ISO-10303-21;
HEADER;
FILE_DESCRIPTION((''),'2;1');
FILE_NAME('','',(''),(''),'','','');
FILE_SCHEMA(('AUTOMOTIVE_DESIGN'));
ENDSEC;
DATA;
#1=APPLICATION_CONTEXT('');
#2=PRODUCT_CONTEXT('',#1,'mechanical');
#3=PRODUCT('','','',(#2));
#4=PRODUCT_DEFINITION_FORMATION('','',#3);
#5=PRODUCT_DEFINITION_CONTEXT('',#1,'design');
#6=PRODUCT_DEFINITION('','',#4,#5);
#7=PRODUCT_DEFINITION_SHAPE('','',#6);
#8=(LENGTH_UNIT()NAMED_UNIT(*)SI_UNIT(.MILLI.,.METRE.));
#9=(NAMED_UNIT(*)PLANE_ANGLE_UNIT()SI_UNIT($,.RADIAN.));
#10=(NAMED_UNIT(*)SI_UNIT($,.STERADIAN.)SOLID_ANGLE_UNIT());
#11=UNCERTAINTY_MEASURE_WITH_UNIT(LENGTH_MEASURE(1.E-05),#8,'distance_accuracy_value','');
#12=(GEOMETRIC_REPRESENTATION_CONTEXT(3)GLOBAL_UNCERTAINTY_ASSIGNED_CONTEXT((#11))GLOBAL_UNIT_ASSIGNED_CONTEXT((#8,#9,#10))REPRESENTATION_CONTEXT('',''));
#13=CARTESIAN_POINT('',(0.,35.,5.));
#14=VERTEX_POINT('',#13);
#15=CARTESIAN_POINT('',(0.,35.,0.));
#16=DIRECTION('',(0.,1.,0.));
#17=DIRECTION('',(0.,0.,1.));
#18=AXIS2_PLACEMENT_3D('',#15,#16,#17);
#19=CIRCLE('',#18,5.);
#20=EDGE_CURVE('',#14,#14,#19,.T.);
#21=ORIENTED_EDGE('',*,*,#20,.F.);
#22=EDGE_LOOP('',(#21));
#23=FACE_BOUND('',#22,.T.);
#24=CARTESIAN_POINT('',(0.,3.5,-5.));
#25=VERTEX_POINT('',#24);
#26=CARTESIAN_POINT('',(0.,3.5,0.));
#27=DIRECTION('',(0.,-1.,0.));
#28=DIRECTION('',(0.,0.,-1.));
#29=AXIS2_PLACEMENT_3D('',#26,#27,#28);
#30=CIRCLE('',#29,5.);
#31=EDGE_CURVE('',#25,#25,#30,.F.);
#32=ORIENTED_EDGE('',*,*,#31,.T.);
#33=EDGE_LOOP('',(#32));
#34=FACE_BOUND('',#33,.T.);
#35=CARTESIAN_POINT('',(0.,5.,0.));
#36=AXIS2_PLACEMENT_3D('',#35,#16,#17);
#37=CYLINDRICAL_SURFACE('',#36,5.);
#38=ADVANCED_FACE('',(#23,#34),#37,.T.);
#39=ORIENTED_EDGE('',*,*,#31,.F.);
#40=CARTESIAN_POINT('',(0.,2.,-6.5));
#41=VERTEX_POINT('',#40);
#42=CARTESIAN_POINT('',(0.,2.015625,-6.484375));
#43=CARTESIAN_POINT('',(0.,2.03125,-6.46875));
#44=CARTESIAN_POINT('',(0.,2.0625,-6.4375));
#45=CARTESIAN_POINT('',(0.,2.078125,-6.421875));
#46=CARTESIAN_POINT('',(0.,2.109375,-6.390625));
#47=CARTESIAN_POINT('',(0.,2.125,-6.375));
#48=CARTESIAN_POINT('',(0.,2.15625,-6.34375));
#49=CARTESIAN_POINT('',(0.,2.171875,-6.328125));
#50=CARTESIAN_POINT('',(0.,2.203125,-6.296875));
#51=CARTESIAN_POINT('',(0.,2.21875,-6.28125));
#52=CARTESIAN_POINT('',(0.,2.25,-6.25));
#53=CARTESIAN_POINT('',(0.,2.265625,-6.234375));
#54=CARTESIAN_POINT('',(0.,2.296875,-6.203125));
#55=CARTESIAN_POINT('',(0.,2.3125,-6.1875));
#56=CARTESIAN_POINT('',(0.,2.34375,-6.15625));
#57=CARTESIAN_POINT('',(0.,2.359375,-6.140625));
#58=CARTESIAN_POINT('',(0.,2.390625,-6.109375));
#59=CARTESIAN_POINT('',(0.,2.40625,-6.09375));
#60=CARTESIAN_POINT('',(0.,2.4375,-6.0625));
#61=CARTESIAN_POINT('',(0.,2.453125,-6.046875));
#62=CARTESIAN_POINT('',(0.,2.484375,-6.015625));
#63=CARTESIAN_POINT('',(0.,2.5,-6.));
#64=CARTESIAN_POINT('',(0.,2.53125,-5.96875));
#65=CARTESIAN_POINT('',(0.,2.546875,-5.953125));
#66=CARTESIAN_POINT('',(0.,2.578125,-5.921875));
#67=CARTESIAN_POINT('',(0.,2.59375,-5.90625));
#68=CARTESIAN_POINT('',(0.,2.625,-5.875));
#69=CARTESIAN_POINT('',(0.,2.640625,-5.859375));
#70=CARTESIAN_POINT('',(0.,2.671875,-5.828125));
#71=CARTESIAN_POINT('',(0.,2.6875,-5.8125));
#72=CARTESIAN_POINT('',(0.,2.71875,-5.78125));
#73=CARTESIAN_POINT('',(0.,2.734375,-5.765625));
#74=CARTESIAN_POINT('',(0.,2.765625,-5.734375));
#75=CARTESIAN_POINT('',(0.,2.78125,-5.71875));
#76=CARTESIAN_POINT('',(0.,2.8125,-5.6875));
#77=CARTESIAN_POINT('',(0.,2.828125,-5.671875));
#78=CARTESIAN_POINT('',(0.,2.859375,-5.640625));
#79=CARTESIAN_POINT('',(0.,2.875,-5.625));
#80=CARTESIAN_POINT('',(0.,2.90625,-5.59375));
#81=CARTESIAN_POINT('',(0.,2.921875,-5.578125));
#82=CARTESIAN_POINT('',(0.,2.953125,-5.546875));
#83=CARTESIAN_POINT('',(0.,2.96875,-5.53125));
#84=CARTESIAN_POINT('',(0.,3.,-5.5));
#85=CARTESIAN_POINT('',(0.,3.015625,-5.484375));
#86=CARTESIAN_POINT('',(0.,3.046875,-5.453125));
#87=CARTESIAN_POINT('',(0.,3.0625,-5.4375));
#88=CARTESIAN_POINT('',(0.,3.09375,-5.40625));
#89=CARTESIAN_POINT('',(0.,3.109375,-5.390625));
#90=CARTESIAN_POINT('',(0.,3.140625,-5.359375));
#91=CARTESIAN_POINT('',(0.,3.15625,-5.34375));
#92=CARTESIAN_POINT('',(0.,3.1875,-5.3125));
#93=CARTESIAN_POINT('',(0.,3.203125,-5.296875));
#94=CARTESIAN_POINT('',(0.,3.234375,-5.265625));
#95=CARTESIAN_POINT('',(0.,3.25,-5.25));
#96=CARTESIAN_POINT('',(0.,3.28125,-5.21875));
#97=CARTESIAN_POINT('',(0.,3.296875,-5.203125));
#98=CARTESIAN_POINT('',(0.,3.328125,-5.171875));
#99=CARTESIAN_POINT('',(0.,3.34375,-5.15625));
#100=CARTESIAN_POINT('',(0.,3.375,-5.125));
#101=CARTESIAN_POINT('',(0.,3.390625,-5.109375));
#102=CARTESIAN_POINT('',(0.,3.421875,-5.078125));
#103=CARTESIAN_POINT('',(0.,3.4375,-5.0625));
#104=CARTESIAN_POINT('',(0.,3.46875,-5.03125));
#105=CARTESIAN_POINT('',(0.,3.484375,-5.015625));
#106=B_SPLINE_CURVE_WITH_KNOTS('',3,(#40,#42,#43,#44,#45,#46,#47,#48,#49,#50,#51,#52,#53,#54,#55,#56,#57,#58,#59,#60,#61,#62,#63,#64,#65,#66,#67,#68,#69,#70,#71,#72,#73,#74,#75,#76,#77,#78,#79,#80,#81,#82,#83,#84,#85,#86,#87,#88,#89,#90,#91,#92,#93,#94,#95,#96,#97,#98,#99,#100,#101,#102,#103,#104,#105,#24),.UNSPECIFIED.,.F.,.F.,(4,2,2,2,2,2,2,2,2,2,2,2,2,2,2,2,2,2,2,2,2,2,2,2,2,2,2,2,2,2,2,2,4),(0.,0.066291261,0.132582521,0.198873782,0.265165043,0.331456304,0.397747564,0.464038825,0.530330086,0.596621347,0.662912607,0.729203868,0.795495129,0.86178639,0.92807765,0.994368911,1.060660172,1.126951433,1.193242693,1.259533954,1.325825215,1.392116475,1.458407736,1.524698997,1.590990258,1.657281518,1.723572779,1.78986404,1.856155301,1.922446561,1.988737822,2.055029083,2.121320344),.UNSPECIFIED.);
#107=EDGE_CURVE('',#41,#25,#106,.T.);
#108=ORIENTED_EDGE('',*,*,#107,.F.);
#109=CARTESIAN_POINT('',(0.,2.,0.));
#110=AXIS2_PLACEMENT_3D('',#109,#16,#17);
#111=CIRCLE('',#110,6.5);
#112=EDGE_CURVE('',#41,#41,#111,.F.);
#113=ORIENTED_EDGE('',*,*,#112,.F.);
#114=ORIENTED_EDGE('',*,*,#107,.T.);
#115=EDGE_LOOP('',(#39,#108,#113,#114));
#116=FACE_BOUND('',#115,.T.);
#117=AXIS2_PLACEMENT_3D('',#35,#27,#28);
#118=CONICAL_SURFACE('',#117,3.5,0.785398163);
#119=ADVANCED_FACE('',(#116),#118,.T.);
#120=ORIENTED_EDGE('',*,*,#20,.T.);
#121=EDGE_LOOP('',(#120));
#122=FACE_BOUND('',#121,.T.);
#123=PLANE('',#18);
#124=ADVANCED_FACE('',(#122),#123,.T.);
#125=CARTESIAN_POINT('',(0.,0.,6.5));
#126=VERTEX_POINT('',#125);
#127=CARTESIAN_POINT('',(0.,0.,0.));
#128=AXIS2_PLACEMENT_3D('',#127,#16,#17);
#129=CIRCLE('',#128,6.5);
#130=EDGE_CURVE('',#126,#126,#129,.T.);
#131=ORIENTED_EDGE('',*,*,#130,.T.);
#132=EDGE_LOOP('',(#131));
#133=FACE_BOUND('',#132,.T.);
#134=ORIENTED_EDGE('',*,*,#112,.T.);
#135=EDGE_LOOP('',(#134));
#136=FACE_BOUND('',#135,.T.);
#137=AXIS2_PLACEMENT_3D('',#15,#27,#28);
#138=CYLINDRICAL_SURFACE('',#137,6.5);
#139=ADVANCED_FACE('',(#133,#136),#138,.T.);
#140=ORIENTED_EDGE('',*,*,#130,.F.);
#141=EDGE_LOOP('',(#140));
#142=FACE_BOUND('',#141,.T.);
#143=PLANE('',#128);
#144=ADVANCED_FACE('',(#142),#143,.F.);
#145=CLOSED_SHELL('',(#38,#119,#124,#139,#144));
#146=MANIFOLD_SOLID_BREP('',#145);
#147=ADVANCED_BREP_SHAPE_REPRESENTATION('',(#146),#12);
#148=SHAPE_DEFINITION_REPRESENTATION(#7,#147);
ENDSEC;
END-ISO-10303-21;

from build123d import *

# Parameters (mm, degrees)
SKETCH_1_R          = 6.5
EXTRUDE_1_DEPTH     = 35
CUT_EXTRUDE_START   = -30
SKETCH_2_R          = 6.5
SKETCH_2_R_2        = 5
CUT_EXTRUDE_1_DEPTH = 30
CHAMFER_1_SIZE      = 3


with BuildPart() as part:
    # Эскиз1 → Бобышка-Вытянуть1 (new body)
    with BuildSketch(Plane(origin=(0, 0, 0), x_dir=(1, 0, 0), z_dir=(0, 1, 0))):
        with Locations(Location((0, 0, 0), (0, 0, 270))):
            Circle(SKETCH_1_R)
    extrude(amount=EXTRUDE_1_DEPTH)

    # Эскиз2 → Вырез-Вытянуть1 (cut)
    with BuildSketch(Plane(origin=(0, 35, 0), x_dir=(1, 0, 0), z_dir=(0, 1, 0)).offset(CUT_EXTRUDE_START)):
        with Locations(Location((0, 0, 0), (0, 0, 270))):
            Circle(SKETCH_2_R)
        with Locations(Location((0, 0, 0), (0, 0, 270))):
            Circle(SKETCH_2_R_2, mode=Mode.SUBTRACT)
    extrude(amount=CUT_EXTRUDE_1_DEPTH, mode=Mode.SUBTRACT)

    # Фаска1
    # the kernel refuses this chamfer: 3 mm, written as the material it takes off along each edge
    with BuildSketch(Plane(origin=(0, 5, 0), x_dir=(0, 0, 1), z_dir=(-1, 0, 0))) as chamfer_1_piece_1_section:
        Polygon((6.5, -CHAMFER_1_SIZE), (6.5 - CHAMFER_1_SIZE, 0), (6.5, 0), align=None)
    chamfer_1_piece_1 = revolve(axis=Axis((0, 5, 0), (0, 1, 0)), mode=Mode.PRIVATE)
    chamfer_1_piece_1 = chamfer_1_piece_1 - Plane(origin=(0, 2.743926997, 0), x_dir=(0, 0, 1), z_dir=(0, -1, 0)) * Cylinder(5, 27, mode=Mode.PRIVATE)
    add(chamfer_1_piece_1, mode=Mode.SUBTRACT)


solid = part.part
